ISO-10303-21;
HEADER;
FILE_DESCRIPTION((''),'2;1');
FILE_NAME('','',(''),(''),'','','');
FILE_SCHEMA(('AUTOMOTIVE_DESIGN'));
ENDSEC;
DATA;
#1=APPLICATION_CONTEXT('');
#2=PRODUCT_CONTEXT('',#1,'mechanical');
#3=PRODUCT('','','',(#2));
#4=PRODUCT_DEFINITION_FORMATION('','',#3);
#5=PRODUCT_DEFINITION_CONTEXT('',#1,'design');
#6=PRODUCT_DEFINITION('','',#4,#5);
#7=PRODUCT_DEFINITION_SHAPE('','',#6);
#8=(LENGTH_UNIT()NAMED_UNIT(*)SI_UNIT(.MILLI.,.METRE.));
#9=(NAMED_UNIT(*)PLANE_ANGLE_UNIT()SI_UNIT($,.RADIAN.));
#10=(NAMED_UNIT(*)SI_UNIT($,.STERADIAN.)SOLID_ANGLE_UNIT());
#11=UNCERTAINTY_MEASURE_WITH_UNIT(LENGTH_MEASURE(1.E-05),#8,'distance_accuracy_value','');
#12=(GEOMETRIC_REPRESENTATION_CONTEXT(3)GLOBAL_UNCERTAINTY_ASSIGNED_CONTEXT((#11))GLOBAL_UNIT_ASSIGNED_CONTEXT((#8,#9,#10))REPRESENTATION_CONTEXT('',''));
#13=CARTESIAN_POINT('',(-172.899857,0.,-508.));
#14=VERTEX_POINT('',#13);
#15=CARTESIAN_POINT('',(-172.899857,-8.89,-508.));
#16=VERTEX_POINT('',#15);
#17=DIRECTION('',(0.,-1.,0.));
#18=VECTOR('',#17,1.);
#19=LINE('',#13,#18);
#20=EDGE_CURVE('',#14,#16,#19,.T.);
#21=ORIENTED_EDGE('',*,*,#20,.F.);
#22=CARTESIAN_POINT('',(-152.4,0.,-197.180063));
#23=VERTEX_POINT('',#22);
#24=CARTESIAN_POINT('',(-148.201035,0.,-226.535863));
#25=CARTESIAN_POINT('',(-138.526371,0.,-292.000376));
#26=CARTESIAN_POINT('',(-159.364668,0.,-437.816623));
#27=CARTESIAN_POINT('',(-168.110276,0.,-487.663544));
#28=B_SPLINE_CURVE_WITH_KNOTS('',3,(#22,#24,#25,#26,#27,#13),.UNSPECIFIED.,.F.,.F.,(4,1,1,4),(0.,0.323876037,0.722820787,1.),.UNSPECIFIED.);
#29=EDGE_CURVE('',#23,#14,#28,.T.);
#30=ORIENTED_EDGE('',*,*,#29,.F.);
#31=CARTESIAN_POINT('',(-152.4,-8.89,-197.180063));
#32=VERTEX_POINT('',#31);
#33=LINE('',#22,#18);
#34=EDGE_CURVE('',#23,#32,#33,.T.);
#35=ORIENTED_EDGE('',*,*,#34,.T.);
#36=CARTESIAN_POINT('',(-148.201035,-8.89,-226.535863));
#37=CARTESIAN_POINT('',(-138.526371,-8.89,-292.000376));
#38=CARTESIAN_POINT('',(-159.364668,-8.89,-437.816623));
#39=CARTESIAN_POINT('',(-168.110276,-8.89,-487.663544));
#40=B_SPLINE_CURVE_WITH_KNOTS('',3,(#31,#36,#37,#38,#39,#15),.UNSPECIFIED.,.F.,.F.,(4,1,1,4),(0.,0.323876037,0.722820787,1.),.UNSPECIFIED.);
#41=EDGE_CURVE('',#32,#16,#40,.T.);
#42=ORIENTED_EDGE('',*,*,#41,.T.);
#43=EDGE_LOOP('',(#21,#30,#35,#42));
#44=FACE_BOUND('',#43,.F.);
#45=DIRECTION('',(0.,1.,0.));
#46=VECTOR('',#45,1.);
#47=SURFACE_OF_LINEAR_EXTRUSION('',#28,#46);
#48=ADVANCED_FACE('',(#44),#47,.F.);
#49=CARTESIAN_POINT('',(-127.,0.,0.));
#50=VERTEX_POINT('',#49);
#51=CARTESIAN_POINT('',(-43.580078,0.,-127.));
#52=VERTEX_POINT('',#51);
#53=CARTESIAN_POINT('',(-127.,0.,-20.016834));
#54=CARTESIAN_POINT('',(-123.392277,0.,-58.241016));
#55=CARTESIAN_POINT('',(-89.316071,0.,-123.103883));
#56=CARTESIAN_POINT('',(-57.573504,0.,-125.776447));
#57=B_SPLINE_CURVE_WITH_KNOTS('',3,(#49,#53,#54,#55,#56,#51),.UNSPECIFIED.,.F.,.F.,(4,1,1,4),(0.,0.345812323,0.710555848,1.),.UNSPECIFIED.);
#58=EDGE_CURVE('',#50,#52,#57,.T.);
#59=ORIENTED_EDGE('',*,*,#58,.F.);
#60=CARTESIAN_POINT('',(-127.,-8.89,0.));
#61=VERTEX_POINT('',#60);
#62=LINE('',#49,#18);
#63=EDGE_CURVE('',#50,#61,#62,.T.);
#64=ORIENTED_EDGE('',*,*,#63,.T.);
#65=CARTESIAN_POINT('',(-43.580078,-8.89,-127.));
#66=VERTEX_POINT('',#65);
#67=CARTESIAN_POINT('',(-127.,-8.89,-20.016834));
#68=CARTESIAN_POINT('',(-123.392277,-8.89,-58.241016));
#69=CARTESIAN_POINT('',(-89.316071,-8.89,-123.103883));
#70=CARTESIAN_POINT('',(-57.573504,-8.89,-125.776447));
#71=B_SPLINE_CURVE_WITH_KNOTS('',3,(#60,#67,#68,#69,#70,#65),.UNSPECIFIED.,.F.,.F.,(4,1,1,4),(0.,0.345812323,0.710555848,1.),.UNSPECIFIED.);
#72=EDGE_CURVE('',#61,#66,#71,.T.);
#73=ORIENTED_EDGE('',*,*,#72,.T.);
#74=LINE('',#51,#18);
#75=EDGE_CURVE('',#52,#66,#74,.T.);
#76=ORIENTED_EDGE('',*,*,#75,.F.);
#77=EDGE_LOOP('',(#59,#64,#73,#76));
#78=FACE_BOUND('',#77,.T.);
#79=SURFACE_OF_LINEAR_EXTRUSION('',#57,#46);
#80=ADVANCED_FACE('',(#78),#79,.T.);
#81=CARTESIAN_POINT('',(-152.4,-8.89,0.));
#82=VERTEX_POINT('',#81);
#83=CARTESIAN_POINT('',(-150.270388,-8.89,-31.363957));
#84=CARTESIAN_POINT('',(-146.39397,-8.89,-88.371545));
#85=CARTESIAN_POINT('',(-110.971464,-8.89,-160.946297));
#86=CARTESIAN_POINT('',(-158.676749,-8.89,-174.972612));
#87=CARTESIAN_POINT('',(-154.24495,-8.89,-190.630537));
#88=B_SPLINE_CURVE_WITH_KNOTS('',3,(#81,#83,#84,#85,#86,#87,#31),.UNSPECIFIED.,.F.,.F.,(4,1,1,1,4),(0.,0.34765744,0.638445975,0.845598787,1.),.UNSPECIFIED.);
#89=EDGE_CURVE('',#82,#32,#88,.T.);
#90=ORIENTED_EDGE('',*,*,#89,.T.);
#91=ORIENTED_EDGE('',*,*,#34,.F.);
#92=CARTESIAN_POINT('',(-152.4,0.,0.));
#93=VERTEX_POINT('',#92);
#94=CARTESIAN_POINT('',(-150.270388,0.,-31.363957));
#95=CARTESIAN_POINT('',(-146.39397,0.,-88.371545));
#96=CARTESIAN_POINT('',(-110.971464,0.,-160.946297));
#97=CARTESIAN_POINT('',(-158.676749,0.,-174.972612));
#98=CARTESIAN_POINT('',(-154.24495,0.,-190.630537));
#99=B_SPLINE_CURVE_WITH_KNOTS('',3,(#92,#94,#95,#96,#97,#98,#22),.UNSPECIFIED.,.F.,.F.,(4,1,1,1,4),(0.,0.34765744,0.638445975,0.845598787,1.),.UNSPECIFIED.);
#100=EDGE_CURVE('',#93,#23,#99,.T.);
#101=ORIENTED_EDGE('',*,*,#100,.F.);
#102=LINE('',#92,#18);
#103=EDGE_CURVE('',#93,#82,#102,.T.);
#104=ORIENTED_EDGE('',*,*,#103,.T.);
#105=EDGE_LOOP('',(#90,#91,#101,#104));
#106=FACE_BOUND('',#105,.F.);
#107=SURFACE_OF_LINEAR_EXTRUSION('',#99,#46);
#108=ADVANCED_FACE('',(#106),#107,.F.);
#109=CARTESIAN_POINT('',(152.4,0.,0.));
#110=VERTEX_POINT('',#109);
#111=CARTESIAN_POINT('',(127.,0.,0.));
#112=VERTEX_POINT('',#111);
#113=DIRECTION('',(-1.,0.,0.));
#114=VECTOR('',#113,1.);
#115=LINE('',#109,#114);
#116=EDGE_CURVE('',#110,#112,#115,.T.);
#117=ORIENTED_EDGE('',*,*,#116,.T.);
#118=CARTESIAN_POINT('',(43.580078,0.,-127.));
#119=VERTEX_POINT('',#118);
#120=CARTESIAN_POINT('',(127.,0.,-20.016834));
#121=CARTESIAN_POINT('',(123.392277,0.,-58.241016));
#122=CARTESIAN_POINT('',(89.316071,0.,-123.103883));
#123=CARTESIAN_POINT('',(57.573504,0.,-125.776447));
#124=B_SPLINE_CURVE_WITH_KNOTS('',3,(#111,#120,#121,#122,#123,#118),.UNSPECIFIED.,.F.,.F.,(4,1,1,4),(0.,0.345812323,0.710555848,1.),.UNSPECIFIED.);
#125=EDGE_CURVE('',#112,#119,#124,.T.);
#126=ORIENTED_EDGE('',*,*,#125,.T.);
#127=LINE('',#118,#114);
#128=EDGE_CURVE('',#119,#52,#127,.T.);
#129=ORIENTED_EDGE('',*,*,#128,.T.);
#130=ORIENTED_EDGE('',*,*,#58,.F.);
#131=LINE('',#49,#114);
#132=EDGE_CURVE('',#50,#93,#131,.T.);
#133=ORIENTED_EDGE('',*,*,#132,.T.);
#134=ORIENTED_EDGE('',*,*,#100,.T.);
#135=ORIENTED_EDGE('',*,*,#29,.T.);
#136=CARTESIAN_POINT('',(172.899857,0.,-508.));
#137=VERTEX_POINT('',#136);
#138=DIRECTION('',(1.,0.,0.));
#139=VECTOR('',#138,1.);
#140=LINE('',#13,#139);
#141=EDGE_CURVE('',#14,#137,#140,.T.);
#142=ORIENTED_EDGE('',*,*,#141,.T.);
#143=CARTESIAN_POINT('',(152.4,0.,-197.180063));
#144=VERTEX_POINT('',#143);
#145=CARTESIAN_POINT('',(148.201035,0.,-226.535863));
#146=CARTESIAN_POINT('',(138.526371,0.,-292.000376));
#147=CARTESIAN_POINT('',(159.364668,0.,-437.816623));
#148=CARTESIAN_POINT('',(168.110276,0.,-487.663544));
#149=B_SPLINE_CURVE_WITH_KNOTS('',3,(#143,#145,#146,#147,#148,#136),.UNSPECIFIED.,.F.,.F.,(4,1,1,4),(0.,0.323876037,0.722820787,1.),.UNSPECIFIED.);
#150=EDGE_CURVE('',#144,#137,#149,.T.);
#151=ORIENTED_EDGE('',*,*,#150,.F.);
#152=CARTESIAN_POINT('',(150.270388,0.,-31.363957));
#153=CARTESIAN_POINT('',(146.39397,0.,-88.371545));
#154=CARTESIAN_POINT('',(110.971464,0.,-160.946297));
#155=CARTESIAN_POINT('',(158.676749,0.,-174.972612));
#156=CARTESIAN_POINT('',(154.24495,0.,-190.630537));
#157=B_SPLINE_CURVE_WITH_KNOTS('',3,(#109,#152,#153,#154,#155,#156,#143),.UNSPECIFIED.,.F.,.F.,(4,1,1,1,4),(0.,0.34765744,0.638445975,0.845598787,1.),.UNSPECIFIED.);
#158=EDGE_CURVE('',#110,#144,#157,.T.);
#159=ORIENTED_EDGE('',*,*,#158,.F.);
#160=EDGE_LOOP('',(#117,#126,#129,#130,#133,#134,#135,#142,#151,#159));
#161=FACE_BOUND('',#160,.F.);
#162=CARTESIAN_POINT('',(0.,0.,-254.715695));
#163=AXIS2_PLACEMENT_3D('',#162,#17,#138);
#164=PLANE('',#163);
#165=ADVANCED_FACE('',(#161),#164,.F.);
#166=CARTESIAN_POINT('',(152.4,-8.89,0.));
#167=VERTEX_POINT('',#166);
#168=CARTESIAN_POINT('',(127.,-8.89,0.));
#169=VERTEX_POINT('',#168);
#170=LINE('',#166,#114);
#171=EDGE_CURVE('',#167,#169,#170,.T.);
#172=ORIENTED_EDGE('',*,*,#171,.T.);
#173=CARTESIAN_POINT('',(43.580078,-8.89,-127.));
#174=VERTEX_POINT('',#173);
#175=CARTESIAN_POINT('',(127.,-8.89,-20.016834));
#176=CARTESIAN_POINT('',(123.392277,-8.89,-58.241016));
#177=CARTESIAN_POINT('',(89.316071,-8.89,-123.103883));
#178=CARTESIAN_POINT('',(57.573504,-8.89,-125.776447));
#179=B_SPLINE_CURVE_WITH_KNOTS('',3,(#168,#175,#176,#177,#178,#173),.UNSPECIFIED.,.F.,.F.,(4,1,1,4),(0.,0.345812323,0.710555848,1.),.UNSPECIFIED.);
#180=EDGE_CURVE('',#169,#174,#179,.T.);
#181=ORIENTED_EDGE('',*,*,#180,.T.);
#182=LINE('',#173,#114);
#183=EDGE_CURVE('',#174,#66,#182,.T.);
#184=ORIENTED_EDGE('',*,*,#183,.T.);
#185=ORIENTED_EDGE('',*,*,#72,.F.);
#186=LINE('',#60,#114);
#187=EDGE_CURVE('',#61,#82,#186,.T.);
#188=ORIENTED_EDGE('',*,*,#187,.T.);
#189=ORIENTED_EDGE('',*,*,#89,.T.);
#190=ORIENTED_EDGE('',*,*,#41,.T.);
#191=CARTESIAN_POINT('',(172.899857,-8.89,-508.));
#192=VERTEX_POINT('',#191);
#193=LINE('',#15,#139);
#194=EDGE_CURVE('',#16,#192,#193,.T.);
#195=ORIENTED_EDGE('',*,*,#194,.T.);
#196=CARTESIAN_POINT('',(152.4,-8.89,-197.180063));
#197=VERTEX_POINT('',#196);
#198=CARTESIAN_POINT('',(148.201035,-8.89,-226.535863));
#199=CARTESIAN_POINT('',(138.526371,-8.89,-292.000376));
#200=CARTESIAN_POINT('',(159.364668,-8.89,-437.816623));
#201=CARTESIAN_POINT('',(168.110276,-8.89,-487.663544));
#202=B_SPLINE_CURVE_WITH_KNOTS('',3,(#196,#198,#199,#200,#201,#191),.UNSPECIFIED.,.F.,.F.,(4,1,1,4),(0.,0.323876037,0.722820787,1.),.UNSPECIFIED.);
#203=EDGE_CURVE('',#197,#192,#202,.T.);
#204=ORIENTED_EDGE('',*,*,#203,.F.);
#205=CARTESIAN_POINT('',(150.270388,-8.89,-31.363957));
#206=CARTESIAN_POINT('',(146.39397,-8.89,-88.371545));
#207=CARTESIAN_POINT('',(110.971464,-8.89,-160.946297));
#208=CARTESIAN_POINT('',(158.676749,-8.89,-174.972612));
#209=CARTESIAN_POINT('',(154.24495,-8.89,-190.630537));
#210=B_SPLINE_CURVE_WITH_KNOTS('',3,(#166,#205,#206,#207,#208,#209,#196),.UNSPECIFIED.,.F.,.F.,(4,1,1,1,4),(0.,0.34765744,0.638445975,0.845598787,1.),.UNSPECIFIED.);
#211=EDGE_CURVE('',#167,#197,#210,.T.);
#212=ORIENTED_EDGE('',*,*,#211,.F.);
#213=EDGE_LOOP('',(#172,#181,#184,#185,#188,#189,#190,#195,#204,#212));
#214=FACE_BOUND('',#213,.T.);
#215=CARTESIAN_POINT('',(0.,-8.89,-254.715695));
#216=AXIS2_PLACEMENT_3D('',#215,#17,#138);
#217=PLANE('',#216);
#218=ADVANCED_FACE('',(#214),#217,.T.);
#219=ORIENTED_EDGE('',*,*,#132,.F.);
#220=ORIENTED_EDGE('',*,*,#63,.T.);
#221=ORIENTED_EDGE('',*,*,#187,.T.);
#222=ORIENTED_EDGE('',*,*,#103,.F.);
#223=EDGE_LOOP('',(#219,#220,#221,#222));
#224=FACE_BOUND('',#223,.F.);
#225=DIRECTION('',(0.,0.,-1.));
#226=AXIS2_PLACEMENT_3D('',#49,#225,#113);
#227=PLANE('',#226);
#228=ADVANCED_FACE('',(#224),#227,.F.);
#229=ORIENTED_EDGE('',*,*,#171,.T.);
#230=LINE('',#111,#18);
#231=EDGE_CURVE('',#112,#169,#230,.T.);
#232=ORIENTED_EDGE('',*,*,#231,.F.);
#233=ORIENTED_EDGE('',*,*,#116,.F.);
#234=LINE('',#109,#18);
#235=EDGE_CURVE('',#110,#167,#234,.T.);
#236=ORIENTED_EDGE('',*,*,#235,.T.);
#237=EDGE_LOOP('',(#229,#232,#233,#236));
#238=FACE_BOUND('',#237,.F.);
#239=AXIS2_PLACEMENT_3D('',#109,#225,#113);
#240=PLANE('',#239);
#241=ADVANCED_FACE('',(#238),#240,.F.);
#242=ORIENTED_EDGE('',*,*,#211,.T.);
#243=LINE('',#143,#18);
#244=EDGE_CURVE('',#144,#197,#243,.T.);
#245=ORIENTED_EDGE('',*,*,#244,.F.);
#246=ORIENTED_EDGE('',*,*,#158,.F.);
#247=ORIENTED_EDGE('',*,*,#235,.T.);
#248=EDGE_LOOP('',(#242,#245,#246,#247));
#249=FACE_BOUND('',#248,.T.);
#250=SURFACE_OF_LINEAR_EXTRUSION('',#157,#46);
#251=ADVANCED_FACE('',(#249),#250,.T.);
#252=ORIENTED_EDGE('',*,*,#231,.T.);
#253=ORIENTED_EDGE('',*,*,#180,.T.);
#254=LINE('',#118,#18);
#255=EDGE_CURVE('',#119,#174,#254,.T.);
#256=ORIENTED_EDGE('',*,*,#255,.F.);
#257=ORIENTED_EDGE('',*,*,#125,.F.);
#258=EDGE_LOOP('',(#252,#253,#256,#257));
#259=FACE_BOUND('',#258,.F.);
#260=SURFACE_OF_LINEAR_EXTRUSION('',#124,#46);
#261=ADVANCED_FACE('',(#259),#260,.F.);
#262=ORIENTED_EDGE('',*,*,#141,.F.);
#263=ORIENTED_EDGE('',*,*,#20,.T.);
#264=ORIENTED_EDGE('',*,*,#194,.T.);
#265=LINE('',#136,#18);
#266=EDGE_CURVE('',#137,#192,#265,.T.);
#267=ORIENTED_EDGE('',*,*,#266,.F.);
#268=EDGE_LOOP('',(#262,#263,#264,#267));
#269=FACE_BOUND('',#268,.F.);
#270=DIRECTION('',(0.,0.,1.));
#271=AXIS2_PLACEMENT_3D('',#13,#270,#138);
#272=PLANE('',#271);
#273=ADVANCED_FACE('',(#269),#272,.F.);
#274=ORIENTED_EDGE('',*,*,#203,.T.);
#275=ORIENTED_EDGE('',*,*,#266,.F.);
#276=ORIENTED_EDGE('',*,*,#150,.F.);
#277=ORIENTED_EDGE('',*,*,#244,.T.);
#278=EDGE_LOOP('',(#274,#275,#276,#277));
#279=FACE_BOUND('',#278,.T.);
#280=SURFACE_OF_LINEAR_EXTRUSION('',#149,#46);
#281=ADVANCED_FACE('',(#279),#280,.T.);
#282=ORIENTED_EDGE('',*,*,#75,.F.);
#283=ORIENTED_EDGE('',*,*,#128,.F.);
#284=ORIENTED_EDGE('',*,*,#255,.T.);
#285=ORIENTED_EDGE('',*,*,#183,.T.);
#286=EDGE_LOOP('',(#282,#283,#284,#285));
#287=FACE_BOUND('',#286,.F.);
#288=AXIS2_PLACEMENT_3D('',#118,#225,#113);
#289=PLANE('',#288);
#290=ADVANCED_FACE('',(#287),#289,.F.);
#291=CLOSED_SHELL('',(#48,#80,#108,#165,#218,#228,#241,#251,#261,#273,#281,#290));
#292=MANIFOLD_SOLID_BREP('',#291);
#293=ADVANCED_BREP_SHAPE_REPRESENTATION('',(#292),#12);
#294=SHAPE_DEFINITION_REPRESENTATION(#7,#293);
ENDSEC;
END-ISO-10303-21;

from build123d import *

# Parameters (mm, degrees)
F1_DEPTH = 8.89


with BuildPart() as f1:
    # F0 (on Front) → F1 (new body)
    with BuildSketch(Plane.XZ):
        with BuildLine():
            Line((152.4, 0), (127, 0))
            add(Edge.make_bspline(
                [(127, 0), (127, -20.0168341398), (123.3922770096, -58.2410161724), (89.3160713506, -123.1038827606), (57.5735042432, -125.7764468865), (43.5800775886, -127)],
                knots=[0, 0, 0, 0, 0.345812323, 0.7105558481, 1, 1, 1, 1], degree=3))
            Line((43.5800775886, -127), (0, -127))
            Line((0, -127), (-43.5800775886, -127))
            add(Edge.make_bspline(
                [(-127, 0), (-127, -20.0168341398), (-123.3922770096, -58.2410161724), (-89.3160713506, -123.1038827606), (-57.5735042432, -125.7764468865), (-43.5800775886, -127)],
                knots=[0, 0, 0, 0, 0.345812323, 0.7105558481, 1, 1, 1, 1], degree=3))
            Line((-127, 0), (-152.4, 0))
            add(Edge.make_bspline(
                [(-152.4, 0), (-150.2703878505, -31.3639571024), (-146.3939702155, -88.3715453558), (-110.9714635835, -160.9462971944), (-158.6767490389, -174.9726116512), (-154.2449504284, -190.6305366091), (-152.4, -197.1800625324)],
                knots=[0, 0, 0, 0, 0.3476574396, 0.6384459753, 0.8455987873, 1, 1, 1, 1], degree=3))
            add(Edge.make_bspline(
                [(-152.4, -197.1800625324), (-148.2010351465, -226.5358633988), (-138.5263708492, -292.0003756963), (-159.3646682678, -437.8166234112), (-168.1102758726, -487.6635444085), (-172.8998571634, -508)],
                knots=[0, 0, 0, 0, 0.3238760373, 0.7228207872, 1, 1, 1, 1], degree=3))
            Line((-172.8998571634, -508), (0, -508))
            Line((0, -508), (172.8998571634, -508))
            add(Edge.make_bspline(
                [(152.4, -197.1800625324), (148.2010351465, -226.5358633988), (138.5263708492, -292.0003756963), (159.3646682678, -437.8166234112), (168.1102758726, -487.6635444085), (172.8998571634, -508)],
                knots=[0, 0, 0, 0, 0.3238760373, 0.7228207872, 1, 1, 1, 1], degree=3))
            add(Edge.make_bspline(
                [(152.4, 0), (150.2703878505, -31.3639571024), (146.3939702155, -88.3715453558), (110.9714635835, -160.9462971944), (158.6767490389, -174.9726116512), (154.2449504284, -190.6305366091), (152.4, -197.1800625324)],
                knots=[0, 0, 0, 0, 0.3476574396, 0.6384459753, 0.8455987873, 1, 1, 1, 1], degree=3))
        make_face()
    extrude(amount=F1_DEPTH)


solid = f1.part
